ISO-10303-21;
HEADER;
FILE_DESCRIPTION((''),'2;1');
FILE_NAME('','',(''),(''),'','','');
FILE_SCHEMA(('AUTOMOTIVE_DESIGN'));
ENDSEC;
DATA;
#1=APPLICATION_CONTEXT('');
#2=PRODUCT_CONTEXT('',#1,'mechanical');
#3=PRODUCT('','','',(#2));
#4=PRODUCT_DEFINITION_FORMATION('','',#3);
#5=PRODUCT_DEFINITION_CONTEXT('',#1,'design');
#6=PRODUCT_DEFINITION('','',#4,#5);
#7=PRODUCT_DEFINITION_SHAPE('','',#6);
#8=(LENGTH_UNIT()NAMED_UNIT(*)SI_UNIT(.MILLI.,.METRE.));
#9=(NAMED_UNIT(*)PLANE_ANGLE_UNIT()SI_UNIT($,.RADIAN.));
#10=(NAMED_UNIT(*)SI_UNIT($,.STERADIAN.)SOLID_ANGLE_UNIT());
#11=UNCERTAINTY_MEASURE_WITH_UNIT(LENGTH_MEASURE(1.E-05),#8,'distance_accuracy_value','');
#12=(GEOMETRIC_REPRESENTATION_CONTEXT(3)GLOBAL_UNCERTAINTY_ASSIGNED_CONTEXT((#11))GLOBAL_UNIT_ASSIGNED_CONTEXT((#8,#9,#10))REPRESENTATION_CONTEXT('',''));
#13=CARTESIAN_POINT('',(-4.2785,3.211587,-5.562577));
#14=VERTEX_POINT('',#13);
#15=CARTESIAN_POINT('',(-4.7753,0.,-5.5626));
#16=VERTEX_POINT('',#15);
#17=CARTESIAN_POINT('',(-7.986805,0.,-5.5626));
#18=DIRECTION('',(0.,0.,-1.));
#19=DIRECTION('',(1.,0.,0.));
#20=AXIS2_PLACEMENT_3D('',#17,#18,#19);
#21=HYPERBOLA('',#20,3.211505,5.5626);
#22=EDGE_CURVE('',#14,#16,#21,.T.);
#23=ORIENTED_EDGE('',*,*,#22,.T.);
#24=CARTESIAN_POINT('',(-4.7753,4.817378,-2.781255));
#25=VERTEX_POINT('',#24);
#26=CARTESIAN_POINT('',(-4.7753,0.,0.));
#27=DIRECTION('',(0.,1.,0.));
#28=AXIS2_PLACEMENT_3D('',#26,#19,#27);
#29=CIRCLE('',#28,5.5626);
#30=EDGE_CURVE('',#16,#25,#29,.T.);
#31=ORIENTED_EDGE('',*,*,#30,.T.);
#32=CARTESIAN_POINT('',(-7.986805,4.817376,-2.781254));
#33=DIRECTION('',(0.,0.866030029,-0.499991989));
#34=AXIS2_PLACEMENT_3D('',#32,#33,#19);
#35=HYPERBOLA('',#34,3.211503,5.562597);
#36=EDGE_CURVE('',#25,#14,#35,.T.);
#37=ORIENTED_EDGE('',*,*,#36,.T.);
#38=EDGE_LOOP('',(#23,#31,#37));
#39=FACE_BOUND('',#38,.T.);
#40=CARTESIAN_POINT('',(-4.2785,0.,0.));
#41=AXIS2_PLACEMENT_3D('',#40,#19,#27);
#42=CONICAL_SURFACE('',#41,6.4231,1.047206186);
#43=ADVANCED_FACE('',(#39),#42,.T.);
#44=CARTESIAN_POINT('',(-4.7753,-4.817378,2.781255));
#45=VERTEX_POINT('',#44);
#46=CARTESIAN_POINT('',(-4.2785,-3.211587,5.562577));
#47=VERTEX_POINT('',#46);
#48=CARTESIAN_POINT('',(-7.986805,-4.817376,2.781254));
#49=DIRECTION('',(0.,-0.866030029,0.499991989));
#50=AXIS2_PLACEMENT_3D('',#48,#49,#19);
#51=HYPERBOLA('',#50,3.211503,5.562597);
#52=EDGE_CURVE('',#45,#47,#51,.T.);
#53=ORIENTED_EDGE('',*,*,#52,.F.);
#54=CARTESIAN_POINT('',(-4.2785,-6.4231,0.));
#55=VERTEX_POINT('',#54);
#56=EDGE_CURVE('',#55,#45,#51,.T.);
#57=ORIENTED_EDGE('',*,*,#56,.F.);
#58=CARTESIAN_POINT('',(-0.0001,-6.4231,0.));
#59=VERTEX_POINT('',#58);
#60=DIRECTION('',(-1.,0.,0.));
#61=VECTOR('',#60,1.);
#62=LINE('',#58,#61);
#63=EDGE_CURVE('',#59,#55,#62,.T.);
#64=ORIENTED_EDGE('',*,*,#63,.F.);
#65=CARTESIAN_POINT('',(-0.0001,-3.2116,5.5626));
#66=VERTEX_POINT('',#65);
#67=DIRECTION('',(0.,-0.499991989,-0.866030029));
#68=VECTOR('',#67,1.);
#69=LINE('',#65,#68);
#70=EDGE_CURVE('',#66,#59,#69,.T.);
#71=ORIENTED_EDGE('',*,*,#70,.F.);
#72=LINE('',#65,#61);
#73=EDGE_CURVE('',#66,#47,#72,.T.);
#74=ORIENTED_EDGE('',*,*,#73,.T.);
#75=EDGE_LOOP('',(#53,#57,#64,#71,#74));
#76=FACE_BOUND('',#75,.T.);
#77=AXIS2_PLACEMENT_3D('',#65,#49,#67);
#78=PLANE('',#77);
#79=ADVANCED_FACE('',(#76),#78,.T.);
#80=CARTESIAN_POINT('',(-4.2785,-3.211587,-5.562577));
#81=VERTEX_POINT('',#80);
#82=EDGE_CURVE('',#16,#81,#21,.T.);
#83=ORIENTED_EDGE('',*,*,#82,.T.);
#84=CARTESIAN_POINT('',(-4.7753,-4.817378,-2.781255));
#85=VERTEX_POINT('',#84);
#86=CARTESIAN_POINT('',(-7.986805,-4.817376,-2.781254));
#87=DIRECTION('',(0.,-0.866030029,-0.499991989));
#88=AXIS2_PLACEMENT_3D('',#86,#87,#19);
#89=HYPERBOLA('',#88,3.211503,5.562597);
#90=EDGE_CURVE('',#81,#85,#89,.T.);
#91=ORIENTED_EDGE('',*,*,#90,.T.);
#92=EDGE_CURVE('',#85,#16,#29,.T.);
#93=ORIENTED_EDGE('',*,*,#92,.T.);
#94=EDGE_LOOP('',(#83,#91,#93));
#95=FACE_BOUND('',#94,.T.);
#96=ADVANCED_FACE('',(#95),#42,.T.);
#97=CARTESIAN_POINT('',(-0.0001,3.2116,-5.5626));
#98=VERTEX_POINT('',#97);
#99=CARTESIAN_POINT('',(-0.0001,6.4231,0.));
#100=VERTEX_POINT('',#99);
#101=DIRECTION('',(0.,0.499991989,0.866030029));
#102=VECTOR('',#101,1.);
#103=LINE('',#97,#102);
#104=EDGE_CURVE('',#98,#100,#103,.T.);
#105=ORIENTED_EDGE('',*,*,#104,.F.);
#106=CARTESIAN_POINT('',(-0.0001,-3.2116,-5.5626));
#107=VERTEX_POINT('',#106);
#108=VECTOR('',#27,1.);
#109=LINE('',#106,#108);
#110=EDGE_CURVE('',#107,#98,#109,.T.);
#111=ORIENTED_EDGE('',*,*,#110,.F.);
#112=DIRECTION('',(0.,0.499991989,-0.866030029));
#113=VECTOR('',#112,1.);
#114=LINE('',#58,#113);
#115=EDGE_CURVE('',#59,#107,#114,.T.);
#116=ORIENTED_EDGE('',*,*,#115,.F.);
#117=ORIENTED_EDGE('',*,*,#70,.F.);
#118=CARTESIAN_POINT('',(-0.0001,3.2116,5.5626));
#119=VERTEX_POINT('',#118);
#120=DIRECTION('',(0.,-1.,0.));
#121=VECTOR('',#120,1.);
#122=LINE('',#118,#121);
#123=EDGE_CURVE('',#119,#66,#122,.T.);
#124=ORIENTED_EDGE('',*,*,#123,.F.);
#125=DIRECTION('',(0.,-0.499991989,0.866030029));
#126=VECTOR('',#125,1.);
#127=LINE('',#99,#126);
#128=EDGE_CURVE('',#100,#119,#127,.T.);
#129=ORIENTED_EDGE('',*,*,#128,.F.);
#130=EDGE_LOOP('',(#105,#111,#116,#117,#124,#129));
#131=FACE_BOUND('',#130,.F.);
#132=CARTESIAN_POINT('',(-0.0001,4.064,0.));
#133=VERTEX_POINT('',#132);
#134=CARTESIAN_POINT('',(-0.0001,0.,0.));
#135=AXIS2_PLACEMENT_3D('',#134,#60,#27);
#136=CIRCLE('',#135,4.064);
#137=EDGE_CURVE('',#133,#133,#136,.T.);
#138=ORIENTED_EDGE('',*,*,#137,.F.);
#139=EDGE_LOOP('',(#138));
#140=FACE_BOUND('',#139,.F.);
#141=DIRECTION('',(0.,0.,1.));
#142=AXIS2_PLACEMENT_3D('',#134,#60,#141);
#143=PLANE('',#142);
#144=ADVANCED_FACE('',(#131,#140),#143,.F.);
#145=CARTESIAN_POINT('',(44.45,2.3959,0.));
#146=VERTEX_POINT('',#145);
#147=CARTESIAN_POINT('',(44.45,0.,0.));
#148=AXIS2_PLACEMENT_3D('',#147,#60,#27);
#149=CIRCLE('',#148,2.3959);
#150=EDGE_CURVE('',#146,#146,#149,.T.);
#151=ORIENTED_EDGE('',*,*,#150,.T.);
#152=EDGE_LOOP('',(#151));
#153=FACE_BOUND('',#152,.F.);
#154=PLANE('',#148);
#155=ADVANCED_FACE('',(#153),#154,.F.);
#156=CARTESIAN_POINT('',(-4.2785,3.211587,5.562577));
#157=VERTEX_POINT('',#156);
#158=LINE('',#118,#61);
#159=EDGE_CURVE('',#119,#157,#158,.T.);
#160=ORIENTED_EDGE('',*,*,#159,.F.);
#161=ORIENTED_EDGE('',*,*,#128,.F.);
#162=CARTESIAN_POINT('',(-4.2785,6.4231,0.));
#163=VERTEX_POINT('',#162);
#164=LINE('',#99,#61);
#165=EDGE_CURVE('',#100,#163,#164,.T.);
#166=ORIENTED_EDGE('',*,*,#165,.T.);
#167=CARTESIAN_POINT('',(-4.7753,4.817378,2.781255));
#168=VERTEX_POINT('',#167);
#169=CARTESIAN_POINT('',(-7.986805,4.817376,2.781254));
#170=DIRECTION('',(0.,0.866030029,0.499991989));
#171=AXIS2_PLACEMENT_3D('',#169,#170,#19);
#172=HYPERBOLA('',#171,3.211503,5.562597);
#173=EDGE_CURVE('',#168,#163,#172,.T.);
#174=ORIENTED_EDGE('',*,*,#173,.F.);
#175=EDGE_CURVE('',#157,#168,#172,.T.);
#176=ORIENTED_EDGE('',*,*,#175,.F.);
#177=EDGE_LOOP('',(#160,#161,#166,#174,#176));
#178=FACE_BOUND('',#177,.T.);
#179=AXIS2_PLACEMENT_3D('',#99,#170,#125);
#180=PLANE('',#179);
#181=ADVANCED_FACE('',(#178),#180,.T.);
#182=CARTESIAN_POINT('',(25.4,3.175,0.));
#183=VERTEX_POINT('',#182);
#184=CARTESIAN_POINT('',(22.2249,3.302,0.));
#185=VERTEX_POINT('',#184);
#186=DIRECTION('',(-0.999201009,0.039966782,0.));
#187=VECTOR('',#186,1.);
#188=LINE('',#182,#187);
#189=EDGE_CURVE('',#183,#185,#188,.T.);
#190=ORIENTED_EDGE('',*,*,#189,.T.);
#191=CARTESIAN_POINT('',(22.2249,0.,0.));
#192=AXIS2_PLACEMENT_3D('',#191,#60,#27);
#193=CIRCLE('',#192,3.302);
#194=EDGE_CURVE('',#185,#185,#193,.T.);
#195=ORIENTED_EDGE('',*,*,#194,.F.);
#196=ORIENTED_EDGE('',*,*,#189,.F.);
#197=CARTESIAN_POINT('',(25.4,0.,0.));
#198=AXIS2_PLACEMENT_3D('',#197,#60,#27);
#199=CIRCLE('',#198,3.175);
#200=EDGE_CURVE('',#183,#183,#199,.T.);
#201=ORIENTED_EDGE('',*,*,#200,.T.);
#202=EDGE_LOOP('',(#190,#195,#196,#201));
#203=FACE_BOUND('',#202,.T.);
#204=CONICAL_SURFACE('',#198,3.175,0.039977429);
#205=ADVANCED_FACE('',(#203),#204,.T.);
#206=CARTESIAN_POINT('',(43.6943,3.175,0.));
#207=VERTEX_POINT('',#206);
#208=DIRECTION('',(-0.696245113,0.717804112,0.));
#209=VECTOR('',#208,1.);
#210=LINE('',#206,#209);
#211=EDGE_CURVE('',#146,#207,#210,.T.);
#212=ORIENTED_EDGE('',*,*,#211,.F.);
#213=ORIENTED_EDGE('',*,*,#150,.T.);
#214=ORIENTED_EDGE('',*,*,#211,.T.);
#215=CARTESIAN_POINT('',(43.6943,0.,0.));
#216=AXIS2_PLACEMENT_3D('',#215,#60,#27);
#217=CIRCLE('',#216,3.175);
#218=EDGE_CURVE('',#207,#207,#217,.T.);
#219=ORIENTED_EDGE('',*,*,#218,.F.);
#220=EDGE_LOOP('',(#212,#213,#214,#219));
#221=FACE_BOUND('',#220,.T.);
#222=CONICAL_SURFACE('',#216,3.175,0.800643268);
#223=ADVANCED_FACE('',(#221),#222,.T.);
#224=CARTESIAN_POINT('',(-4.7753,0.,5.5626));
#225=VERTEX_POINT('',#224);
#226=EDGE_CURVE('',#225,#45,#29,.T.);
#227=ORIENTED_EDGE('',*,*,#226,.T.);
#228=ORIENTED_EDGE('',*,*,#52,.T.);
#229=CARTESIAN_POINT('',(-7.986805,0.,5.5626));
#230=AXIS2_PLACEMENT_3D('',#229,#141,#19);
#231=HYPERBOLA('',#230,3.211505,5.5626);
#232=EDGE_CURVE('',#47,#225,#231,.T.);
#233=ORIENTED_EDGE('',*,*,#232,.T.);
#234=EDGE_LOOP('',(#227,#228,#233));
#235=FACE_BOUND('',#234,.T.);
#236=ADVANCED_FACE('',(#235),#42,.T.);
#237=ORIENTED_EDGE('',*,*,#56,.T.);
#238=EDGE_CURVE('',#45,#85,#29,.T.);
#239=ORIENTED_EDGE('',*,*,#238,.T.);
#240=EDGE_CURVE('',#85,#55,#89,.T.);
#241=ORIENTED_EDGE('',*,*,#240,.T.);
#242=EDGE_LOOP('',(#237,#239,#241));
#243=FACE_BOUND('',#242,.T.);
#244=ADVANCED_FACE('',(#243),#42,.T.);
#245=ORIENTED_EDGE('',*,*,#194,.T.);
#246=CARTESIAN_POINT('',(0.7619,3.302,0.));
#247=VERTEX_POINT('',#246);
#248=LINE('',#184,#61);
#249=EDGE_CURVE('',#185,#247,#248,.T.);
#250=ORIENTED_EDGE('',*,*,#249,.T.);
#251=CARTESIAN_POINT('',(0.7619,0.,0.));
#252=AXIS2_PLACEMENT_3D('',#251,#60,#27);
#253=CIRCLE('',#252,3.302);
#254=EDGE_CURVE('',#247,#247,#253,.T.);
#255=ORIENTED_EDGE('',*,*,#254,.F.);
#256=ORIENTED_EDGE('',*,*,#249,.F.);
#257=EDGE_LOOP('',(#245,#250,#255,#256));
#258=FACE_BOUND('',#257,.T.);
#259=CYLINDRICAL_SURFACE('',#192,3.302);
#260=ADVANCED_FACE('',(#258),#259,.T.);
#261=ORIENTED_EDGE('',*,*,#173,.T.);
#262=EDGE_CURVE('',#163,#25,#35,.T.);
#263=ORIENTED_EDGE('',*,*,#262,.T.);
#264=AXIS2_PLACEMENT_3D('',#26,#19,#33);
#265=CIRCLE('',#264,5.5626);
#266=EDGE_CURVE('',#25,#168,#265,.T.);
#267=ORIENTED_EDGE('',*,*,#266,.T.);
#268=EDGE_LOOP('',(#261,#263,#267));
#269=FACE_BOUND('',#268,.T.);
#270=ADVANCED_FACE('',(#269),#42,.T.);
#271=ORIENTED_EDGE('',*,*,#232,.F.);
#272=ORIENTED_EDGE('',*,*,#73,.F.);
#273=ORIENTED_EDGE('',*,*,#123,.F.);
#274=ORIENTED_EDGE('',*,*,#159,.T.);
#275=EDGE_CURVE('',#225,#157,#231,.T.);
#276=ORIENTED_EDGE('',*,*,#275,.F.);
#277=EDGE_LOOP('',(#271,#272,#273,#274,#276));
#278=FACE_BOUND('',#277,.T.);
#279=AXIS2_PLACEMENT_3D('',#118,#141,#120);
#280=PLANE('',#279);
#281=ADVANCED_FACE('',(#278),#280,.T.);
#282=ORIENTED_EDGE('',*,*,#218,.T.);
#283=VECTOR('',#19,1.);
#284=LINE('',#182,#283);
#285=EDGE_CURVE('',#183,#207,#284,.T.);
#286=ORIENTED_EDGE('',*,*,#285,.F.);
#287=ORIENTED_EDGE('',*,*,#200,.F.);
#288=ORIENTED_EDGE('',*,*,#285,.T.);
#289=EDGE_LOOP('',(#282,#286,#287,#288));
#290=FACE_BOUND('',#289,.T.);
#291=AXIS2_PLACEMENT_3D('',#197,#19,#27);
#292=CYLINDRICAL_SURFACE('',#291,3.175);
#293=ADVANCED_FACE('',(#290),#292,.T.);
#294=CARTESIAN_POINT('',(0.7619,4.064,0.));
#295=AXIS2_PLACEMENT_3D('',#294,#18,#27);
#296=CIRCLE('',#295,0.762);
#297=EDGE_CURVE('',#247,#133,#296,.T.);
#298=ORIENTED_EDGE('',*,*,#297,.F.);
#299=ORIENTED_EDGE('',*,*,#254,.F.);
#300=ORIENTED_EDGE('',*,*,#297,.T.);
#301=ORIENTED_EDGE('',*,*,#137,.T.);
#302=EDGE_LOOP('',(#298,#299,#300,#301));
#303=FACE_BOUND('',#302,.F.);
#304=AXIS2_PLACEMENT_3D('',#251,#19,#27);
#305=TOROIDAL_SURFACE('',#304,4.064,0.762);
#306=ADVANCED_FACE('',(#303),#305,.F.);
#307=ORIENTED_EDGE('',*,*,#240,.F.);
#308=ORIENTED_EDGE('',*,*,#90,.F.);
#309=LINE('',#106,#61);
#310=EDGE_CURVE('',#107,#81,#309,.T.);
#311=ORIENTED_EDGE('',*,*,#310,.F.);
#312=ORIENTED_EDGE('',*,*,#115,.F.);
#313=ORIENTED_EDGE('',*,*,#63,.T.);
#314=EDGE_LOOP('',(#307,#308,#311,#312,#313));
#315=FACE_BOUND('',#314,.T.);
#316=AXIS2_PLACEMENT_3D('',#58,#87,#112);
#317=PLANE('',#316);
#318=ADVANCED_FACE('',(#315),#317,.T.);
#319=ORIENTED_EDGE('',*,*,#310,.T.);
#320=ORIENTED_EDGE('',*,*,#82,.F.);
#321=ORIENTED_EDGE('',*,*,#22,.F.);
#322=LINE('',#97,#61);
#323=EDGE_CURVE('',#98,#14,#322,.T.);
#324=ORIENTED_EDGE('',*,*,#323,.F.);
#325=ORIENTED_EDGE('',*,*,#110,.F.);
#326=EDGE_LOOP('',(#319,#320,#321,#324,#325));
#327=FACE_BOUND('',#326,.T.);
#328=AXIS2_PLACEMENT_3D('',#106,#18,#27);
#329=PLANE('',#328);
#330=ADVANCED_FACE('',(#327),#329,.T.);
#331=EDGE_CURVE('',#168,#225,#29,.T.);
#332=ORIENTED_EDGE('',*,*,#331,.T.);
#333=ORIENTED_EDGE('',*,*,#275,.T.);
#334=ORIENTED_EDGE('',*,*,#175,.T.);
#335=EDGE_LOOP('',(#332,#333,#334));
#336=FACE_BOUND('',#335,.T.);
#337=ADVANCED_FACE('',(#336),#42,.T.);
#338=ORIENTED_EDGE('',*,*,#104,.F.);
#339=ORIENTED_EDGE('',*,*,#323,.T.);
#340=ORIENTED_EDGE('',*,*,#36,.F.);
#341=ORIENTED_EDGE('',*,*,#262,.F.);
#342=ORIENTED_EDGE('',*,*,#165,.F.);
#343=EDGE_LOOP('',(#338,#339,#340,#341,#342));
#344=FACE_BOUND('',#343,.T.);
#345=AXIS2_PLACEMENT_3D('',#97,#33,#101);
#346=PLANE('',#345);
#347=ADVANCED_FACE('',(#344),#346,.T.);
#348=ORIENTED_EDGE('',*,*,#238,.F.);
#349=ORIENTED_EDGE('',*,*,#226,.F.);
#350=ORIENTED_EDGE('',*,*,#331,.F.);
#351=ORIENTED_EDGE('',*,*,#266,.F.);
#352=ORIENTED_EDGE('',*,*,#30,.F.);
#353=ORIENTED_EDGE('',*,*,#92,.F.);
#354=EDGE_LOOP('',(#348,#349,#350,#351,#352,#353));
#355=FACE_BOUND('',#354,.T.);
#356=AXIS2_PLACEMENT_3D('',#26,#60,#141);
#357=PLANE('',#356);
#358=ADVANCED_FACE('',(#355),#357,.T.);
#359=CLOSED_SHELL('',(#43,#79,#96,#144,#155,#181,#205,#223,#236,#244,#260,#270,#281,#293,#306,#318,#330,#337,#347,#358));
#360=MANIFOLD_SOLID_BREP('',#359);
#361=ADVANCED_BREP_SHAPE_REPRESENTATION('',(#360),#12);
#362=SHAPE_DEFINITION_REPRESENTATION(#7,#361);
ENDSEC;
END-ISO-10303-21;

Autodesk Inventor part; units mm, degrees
ref_plane "YZ Plane" through (0, 0, 0) normal (1, 0, 0) x (0, 1, 0)
ref_plane "XZ Plane" through (0, 0, 0) normal (0, 1, 0) x (-1, 0, 0)
sketch "Sketch1" plane through (0, 0, 0) normal (0, 0, 1) x (1, 0, 0)
  line L0 (0, 5.5626) -> (0, 3.302)
  line L1 (25.4, 3.175) -> (44.45, 3.175)
  line L2 (44.45, 3.175) -> (44.45, 0)
  line L3 (44.45, 0) -> (-0.0001, 0)
  line L4 (-8.8901, 0) -> (53.34, 0) projected
  line L5 (-0.0001, 0) -> (-0.0001, 5.5626)
  line L6 (-0.0001, 5.5626) -> (0, 5.5626)
  line L7 (25.4, 3.175) -> (22.2249, 3.302)
  line L8 (22.2249, 3.302) -> (0, 3.302)
  line L9 (0, -1.1125) -> (0, 6.6751) projected
  dimension "d0" = 44.45
  dimension "d1" = 19.05
  dimension "d2" = 6.35
  dimension "d9" = 0.0001
  dimension "d10" = 11.1252
  dimension "d13" = 3.1751
  dimension "d14" = 6.604
revolve "Body" add sketch "Sketch1" angle 360 about axis through (44.45, 0, 0) along (-1, 0, 0)
sketch "Sketch2" plane through (-0.0001, 0, 0) normal (-1, 0, 0) x (0, 0, 1)
  line L0 (0, 6.4231) -> (5.5626, 3.2116)
  line L1 (5.5626, 3.2116) -> (5.5626, -3.2116)
  line L2 (5.5626, -3.2116) -> (0, -6.4231)
  line L3 (0, -6.4231) -> (-5.5626, -3.2116)
  line L4 (-5.5626, -3.2116) -> (-5.5626, 3.2116)
  line L5 (-5.5626, 3.2116) -> (0, 6.4231)
  point P0 (0, 0)
  point P1 (0, 0)
  dimension "d11" = 11.1252
extrude "Head" add sketch "Sketch2" along normal blind 4.7752
sketch "Sketch4" plane through (0, 0, 0) normal (0, 0, 1) x (1, 0, 0)
  line L0 (-4.7753, 5.5626) -> (-4.7753, 6.4231)
  line L1 (-4.7753, 6.4231) -> (-4.2785, 6.4231)
  line L2 (-4.2785, 6.4231) -> (-4.7753, 5.5626)
  line L3 (-5.7303, 0) -> (0.9549, 0) projected
  line L4 (-0.0001, 6.4231) -> (-4.7753, 6.4231) projected
  line L5 (-4.7753, 3.2116) -> (-4.7753, 6.4231) projected
  dimension "d5" = 30
  dimension "d19" = 11.1252
revolve "Chamfer1" cut sketch "Sketch4" angle 360 about axis through (-10, 0, 0) along (1, 0, 0)
thread "Thread" size "1/4-20 UNC" class "2A" standard "ANSI Unified Screw Threads" length 19.05
chamfer "Chamfer2" distance 0.7791 distance2 0.7557 1 edges at (44.45, -3.175, 0) measured on face at (44.45, -0.7017, 0.0433)
ref_plane "Work Plane1" through (1.525, 0, 0) normal (0, 0, 1) x (1, 0, 0)
fillet "Fillet2" radius 0.762 1 edges at (0, -3.302, 0)
equation "\"d0\" = NLG"
equation "\"d1\" = GEL"
equation "\"d2\" = GD"
equation "\"d10\" = SD2"
equation "\"d14\" = BDM"
equation "\"d11\" = SW"
equation "\"d3\" = KOH - SD"
equation "\"d5\" = ANG1"
equation "\"d19\" = SW0"
equation "\"d63\" = R"
equation "\"d15\" = GEL"
equation "\"d6\" = -0.5 * SPD + 0.5 * GD"
equation "\"NLG\" = 44.45"
equation "\"GD\" = NND"
equation "\"BDM\" = 6.604"
equation "\"KOH\" = 4.7752"
equation "\"GEL\" = 19.05"
equation "\"SW\" = 11.1252"
equation "\"SW0\" = SW"
equation "\"SPD\" = GD1"
equation "\"SD2\" = SW"
equation "\"SD\" = 0"
equation "\"ANG1\" = 30deg"
equation "\"GAL\" = 3.175"
equation "\"GUL\" = 0.238 * GAL"
equation "\"R\" = 0.762"
equation "\"d62\" = -NLG - SD + GUL"
equation "\"GD1\" = 4.79184"
equation "\"THREADDIA\" = 6.35"
equation "\"TOA\" = 30deg"
equation "\"NND\" = 6.35"
equation "\"E0\" = 1.155 * SW"
properties part number "ANSI/ASME B18.2.1 - 1/4-20 UNC - 1.75" material "Steel, Mild"
